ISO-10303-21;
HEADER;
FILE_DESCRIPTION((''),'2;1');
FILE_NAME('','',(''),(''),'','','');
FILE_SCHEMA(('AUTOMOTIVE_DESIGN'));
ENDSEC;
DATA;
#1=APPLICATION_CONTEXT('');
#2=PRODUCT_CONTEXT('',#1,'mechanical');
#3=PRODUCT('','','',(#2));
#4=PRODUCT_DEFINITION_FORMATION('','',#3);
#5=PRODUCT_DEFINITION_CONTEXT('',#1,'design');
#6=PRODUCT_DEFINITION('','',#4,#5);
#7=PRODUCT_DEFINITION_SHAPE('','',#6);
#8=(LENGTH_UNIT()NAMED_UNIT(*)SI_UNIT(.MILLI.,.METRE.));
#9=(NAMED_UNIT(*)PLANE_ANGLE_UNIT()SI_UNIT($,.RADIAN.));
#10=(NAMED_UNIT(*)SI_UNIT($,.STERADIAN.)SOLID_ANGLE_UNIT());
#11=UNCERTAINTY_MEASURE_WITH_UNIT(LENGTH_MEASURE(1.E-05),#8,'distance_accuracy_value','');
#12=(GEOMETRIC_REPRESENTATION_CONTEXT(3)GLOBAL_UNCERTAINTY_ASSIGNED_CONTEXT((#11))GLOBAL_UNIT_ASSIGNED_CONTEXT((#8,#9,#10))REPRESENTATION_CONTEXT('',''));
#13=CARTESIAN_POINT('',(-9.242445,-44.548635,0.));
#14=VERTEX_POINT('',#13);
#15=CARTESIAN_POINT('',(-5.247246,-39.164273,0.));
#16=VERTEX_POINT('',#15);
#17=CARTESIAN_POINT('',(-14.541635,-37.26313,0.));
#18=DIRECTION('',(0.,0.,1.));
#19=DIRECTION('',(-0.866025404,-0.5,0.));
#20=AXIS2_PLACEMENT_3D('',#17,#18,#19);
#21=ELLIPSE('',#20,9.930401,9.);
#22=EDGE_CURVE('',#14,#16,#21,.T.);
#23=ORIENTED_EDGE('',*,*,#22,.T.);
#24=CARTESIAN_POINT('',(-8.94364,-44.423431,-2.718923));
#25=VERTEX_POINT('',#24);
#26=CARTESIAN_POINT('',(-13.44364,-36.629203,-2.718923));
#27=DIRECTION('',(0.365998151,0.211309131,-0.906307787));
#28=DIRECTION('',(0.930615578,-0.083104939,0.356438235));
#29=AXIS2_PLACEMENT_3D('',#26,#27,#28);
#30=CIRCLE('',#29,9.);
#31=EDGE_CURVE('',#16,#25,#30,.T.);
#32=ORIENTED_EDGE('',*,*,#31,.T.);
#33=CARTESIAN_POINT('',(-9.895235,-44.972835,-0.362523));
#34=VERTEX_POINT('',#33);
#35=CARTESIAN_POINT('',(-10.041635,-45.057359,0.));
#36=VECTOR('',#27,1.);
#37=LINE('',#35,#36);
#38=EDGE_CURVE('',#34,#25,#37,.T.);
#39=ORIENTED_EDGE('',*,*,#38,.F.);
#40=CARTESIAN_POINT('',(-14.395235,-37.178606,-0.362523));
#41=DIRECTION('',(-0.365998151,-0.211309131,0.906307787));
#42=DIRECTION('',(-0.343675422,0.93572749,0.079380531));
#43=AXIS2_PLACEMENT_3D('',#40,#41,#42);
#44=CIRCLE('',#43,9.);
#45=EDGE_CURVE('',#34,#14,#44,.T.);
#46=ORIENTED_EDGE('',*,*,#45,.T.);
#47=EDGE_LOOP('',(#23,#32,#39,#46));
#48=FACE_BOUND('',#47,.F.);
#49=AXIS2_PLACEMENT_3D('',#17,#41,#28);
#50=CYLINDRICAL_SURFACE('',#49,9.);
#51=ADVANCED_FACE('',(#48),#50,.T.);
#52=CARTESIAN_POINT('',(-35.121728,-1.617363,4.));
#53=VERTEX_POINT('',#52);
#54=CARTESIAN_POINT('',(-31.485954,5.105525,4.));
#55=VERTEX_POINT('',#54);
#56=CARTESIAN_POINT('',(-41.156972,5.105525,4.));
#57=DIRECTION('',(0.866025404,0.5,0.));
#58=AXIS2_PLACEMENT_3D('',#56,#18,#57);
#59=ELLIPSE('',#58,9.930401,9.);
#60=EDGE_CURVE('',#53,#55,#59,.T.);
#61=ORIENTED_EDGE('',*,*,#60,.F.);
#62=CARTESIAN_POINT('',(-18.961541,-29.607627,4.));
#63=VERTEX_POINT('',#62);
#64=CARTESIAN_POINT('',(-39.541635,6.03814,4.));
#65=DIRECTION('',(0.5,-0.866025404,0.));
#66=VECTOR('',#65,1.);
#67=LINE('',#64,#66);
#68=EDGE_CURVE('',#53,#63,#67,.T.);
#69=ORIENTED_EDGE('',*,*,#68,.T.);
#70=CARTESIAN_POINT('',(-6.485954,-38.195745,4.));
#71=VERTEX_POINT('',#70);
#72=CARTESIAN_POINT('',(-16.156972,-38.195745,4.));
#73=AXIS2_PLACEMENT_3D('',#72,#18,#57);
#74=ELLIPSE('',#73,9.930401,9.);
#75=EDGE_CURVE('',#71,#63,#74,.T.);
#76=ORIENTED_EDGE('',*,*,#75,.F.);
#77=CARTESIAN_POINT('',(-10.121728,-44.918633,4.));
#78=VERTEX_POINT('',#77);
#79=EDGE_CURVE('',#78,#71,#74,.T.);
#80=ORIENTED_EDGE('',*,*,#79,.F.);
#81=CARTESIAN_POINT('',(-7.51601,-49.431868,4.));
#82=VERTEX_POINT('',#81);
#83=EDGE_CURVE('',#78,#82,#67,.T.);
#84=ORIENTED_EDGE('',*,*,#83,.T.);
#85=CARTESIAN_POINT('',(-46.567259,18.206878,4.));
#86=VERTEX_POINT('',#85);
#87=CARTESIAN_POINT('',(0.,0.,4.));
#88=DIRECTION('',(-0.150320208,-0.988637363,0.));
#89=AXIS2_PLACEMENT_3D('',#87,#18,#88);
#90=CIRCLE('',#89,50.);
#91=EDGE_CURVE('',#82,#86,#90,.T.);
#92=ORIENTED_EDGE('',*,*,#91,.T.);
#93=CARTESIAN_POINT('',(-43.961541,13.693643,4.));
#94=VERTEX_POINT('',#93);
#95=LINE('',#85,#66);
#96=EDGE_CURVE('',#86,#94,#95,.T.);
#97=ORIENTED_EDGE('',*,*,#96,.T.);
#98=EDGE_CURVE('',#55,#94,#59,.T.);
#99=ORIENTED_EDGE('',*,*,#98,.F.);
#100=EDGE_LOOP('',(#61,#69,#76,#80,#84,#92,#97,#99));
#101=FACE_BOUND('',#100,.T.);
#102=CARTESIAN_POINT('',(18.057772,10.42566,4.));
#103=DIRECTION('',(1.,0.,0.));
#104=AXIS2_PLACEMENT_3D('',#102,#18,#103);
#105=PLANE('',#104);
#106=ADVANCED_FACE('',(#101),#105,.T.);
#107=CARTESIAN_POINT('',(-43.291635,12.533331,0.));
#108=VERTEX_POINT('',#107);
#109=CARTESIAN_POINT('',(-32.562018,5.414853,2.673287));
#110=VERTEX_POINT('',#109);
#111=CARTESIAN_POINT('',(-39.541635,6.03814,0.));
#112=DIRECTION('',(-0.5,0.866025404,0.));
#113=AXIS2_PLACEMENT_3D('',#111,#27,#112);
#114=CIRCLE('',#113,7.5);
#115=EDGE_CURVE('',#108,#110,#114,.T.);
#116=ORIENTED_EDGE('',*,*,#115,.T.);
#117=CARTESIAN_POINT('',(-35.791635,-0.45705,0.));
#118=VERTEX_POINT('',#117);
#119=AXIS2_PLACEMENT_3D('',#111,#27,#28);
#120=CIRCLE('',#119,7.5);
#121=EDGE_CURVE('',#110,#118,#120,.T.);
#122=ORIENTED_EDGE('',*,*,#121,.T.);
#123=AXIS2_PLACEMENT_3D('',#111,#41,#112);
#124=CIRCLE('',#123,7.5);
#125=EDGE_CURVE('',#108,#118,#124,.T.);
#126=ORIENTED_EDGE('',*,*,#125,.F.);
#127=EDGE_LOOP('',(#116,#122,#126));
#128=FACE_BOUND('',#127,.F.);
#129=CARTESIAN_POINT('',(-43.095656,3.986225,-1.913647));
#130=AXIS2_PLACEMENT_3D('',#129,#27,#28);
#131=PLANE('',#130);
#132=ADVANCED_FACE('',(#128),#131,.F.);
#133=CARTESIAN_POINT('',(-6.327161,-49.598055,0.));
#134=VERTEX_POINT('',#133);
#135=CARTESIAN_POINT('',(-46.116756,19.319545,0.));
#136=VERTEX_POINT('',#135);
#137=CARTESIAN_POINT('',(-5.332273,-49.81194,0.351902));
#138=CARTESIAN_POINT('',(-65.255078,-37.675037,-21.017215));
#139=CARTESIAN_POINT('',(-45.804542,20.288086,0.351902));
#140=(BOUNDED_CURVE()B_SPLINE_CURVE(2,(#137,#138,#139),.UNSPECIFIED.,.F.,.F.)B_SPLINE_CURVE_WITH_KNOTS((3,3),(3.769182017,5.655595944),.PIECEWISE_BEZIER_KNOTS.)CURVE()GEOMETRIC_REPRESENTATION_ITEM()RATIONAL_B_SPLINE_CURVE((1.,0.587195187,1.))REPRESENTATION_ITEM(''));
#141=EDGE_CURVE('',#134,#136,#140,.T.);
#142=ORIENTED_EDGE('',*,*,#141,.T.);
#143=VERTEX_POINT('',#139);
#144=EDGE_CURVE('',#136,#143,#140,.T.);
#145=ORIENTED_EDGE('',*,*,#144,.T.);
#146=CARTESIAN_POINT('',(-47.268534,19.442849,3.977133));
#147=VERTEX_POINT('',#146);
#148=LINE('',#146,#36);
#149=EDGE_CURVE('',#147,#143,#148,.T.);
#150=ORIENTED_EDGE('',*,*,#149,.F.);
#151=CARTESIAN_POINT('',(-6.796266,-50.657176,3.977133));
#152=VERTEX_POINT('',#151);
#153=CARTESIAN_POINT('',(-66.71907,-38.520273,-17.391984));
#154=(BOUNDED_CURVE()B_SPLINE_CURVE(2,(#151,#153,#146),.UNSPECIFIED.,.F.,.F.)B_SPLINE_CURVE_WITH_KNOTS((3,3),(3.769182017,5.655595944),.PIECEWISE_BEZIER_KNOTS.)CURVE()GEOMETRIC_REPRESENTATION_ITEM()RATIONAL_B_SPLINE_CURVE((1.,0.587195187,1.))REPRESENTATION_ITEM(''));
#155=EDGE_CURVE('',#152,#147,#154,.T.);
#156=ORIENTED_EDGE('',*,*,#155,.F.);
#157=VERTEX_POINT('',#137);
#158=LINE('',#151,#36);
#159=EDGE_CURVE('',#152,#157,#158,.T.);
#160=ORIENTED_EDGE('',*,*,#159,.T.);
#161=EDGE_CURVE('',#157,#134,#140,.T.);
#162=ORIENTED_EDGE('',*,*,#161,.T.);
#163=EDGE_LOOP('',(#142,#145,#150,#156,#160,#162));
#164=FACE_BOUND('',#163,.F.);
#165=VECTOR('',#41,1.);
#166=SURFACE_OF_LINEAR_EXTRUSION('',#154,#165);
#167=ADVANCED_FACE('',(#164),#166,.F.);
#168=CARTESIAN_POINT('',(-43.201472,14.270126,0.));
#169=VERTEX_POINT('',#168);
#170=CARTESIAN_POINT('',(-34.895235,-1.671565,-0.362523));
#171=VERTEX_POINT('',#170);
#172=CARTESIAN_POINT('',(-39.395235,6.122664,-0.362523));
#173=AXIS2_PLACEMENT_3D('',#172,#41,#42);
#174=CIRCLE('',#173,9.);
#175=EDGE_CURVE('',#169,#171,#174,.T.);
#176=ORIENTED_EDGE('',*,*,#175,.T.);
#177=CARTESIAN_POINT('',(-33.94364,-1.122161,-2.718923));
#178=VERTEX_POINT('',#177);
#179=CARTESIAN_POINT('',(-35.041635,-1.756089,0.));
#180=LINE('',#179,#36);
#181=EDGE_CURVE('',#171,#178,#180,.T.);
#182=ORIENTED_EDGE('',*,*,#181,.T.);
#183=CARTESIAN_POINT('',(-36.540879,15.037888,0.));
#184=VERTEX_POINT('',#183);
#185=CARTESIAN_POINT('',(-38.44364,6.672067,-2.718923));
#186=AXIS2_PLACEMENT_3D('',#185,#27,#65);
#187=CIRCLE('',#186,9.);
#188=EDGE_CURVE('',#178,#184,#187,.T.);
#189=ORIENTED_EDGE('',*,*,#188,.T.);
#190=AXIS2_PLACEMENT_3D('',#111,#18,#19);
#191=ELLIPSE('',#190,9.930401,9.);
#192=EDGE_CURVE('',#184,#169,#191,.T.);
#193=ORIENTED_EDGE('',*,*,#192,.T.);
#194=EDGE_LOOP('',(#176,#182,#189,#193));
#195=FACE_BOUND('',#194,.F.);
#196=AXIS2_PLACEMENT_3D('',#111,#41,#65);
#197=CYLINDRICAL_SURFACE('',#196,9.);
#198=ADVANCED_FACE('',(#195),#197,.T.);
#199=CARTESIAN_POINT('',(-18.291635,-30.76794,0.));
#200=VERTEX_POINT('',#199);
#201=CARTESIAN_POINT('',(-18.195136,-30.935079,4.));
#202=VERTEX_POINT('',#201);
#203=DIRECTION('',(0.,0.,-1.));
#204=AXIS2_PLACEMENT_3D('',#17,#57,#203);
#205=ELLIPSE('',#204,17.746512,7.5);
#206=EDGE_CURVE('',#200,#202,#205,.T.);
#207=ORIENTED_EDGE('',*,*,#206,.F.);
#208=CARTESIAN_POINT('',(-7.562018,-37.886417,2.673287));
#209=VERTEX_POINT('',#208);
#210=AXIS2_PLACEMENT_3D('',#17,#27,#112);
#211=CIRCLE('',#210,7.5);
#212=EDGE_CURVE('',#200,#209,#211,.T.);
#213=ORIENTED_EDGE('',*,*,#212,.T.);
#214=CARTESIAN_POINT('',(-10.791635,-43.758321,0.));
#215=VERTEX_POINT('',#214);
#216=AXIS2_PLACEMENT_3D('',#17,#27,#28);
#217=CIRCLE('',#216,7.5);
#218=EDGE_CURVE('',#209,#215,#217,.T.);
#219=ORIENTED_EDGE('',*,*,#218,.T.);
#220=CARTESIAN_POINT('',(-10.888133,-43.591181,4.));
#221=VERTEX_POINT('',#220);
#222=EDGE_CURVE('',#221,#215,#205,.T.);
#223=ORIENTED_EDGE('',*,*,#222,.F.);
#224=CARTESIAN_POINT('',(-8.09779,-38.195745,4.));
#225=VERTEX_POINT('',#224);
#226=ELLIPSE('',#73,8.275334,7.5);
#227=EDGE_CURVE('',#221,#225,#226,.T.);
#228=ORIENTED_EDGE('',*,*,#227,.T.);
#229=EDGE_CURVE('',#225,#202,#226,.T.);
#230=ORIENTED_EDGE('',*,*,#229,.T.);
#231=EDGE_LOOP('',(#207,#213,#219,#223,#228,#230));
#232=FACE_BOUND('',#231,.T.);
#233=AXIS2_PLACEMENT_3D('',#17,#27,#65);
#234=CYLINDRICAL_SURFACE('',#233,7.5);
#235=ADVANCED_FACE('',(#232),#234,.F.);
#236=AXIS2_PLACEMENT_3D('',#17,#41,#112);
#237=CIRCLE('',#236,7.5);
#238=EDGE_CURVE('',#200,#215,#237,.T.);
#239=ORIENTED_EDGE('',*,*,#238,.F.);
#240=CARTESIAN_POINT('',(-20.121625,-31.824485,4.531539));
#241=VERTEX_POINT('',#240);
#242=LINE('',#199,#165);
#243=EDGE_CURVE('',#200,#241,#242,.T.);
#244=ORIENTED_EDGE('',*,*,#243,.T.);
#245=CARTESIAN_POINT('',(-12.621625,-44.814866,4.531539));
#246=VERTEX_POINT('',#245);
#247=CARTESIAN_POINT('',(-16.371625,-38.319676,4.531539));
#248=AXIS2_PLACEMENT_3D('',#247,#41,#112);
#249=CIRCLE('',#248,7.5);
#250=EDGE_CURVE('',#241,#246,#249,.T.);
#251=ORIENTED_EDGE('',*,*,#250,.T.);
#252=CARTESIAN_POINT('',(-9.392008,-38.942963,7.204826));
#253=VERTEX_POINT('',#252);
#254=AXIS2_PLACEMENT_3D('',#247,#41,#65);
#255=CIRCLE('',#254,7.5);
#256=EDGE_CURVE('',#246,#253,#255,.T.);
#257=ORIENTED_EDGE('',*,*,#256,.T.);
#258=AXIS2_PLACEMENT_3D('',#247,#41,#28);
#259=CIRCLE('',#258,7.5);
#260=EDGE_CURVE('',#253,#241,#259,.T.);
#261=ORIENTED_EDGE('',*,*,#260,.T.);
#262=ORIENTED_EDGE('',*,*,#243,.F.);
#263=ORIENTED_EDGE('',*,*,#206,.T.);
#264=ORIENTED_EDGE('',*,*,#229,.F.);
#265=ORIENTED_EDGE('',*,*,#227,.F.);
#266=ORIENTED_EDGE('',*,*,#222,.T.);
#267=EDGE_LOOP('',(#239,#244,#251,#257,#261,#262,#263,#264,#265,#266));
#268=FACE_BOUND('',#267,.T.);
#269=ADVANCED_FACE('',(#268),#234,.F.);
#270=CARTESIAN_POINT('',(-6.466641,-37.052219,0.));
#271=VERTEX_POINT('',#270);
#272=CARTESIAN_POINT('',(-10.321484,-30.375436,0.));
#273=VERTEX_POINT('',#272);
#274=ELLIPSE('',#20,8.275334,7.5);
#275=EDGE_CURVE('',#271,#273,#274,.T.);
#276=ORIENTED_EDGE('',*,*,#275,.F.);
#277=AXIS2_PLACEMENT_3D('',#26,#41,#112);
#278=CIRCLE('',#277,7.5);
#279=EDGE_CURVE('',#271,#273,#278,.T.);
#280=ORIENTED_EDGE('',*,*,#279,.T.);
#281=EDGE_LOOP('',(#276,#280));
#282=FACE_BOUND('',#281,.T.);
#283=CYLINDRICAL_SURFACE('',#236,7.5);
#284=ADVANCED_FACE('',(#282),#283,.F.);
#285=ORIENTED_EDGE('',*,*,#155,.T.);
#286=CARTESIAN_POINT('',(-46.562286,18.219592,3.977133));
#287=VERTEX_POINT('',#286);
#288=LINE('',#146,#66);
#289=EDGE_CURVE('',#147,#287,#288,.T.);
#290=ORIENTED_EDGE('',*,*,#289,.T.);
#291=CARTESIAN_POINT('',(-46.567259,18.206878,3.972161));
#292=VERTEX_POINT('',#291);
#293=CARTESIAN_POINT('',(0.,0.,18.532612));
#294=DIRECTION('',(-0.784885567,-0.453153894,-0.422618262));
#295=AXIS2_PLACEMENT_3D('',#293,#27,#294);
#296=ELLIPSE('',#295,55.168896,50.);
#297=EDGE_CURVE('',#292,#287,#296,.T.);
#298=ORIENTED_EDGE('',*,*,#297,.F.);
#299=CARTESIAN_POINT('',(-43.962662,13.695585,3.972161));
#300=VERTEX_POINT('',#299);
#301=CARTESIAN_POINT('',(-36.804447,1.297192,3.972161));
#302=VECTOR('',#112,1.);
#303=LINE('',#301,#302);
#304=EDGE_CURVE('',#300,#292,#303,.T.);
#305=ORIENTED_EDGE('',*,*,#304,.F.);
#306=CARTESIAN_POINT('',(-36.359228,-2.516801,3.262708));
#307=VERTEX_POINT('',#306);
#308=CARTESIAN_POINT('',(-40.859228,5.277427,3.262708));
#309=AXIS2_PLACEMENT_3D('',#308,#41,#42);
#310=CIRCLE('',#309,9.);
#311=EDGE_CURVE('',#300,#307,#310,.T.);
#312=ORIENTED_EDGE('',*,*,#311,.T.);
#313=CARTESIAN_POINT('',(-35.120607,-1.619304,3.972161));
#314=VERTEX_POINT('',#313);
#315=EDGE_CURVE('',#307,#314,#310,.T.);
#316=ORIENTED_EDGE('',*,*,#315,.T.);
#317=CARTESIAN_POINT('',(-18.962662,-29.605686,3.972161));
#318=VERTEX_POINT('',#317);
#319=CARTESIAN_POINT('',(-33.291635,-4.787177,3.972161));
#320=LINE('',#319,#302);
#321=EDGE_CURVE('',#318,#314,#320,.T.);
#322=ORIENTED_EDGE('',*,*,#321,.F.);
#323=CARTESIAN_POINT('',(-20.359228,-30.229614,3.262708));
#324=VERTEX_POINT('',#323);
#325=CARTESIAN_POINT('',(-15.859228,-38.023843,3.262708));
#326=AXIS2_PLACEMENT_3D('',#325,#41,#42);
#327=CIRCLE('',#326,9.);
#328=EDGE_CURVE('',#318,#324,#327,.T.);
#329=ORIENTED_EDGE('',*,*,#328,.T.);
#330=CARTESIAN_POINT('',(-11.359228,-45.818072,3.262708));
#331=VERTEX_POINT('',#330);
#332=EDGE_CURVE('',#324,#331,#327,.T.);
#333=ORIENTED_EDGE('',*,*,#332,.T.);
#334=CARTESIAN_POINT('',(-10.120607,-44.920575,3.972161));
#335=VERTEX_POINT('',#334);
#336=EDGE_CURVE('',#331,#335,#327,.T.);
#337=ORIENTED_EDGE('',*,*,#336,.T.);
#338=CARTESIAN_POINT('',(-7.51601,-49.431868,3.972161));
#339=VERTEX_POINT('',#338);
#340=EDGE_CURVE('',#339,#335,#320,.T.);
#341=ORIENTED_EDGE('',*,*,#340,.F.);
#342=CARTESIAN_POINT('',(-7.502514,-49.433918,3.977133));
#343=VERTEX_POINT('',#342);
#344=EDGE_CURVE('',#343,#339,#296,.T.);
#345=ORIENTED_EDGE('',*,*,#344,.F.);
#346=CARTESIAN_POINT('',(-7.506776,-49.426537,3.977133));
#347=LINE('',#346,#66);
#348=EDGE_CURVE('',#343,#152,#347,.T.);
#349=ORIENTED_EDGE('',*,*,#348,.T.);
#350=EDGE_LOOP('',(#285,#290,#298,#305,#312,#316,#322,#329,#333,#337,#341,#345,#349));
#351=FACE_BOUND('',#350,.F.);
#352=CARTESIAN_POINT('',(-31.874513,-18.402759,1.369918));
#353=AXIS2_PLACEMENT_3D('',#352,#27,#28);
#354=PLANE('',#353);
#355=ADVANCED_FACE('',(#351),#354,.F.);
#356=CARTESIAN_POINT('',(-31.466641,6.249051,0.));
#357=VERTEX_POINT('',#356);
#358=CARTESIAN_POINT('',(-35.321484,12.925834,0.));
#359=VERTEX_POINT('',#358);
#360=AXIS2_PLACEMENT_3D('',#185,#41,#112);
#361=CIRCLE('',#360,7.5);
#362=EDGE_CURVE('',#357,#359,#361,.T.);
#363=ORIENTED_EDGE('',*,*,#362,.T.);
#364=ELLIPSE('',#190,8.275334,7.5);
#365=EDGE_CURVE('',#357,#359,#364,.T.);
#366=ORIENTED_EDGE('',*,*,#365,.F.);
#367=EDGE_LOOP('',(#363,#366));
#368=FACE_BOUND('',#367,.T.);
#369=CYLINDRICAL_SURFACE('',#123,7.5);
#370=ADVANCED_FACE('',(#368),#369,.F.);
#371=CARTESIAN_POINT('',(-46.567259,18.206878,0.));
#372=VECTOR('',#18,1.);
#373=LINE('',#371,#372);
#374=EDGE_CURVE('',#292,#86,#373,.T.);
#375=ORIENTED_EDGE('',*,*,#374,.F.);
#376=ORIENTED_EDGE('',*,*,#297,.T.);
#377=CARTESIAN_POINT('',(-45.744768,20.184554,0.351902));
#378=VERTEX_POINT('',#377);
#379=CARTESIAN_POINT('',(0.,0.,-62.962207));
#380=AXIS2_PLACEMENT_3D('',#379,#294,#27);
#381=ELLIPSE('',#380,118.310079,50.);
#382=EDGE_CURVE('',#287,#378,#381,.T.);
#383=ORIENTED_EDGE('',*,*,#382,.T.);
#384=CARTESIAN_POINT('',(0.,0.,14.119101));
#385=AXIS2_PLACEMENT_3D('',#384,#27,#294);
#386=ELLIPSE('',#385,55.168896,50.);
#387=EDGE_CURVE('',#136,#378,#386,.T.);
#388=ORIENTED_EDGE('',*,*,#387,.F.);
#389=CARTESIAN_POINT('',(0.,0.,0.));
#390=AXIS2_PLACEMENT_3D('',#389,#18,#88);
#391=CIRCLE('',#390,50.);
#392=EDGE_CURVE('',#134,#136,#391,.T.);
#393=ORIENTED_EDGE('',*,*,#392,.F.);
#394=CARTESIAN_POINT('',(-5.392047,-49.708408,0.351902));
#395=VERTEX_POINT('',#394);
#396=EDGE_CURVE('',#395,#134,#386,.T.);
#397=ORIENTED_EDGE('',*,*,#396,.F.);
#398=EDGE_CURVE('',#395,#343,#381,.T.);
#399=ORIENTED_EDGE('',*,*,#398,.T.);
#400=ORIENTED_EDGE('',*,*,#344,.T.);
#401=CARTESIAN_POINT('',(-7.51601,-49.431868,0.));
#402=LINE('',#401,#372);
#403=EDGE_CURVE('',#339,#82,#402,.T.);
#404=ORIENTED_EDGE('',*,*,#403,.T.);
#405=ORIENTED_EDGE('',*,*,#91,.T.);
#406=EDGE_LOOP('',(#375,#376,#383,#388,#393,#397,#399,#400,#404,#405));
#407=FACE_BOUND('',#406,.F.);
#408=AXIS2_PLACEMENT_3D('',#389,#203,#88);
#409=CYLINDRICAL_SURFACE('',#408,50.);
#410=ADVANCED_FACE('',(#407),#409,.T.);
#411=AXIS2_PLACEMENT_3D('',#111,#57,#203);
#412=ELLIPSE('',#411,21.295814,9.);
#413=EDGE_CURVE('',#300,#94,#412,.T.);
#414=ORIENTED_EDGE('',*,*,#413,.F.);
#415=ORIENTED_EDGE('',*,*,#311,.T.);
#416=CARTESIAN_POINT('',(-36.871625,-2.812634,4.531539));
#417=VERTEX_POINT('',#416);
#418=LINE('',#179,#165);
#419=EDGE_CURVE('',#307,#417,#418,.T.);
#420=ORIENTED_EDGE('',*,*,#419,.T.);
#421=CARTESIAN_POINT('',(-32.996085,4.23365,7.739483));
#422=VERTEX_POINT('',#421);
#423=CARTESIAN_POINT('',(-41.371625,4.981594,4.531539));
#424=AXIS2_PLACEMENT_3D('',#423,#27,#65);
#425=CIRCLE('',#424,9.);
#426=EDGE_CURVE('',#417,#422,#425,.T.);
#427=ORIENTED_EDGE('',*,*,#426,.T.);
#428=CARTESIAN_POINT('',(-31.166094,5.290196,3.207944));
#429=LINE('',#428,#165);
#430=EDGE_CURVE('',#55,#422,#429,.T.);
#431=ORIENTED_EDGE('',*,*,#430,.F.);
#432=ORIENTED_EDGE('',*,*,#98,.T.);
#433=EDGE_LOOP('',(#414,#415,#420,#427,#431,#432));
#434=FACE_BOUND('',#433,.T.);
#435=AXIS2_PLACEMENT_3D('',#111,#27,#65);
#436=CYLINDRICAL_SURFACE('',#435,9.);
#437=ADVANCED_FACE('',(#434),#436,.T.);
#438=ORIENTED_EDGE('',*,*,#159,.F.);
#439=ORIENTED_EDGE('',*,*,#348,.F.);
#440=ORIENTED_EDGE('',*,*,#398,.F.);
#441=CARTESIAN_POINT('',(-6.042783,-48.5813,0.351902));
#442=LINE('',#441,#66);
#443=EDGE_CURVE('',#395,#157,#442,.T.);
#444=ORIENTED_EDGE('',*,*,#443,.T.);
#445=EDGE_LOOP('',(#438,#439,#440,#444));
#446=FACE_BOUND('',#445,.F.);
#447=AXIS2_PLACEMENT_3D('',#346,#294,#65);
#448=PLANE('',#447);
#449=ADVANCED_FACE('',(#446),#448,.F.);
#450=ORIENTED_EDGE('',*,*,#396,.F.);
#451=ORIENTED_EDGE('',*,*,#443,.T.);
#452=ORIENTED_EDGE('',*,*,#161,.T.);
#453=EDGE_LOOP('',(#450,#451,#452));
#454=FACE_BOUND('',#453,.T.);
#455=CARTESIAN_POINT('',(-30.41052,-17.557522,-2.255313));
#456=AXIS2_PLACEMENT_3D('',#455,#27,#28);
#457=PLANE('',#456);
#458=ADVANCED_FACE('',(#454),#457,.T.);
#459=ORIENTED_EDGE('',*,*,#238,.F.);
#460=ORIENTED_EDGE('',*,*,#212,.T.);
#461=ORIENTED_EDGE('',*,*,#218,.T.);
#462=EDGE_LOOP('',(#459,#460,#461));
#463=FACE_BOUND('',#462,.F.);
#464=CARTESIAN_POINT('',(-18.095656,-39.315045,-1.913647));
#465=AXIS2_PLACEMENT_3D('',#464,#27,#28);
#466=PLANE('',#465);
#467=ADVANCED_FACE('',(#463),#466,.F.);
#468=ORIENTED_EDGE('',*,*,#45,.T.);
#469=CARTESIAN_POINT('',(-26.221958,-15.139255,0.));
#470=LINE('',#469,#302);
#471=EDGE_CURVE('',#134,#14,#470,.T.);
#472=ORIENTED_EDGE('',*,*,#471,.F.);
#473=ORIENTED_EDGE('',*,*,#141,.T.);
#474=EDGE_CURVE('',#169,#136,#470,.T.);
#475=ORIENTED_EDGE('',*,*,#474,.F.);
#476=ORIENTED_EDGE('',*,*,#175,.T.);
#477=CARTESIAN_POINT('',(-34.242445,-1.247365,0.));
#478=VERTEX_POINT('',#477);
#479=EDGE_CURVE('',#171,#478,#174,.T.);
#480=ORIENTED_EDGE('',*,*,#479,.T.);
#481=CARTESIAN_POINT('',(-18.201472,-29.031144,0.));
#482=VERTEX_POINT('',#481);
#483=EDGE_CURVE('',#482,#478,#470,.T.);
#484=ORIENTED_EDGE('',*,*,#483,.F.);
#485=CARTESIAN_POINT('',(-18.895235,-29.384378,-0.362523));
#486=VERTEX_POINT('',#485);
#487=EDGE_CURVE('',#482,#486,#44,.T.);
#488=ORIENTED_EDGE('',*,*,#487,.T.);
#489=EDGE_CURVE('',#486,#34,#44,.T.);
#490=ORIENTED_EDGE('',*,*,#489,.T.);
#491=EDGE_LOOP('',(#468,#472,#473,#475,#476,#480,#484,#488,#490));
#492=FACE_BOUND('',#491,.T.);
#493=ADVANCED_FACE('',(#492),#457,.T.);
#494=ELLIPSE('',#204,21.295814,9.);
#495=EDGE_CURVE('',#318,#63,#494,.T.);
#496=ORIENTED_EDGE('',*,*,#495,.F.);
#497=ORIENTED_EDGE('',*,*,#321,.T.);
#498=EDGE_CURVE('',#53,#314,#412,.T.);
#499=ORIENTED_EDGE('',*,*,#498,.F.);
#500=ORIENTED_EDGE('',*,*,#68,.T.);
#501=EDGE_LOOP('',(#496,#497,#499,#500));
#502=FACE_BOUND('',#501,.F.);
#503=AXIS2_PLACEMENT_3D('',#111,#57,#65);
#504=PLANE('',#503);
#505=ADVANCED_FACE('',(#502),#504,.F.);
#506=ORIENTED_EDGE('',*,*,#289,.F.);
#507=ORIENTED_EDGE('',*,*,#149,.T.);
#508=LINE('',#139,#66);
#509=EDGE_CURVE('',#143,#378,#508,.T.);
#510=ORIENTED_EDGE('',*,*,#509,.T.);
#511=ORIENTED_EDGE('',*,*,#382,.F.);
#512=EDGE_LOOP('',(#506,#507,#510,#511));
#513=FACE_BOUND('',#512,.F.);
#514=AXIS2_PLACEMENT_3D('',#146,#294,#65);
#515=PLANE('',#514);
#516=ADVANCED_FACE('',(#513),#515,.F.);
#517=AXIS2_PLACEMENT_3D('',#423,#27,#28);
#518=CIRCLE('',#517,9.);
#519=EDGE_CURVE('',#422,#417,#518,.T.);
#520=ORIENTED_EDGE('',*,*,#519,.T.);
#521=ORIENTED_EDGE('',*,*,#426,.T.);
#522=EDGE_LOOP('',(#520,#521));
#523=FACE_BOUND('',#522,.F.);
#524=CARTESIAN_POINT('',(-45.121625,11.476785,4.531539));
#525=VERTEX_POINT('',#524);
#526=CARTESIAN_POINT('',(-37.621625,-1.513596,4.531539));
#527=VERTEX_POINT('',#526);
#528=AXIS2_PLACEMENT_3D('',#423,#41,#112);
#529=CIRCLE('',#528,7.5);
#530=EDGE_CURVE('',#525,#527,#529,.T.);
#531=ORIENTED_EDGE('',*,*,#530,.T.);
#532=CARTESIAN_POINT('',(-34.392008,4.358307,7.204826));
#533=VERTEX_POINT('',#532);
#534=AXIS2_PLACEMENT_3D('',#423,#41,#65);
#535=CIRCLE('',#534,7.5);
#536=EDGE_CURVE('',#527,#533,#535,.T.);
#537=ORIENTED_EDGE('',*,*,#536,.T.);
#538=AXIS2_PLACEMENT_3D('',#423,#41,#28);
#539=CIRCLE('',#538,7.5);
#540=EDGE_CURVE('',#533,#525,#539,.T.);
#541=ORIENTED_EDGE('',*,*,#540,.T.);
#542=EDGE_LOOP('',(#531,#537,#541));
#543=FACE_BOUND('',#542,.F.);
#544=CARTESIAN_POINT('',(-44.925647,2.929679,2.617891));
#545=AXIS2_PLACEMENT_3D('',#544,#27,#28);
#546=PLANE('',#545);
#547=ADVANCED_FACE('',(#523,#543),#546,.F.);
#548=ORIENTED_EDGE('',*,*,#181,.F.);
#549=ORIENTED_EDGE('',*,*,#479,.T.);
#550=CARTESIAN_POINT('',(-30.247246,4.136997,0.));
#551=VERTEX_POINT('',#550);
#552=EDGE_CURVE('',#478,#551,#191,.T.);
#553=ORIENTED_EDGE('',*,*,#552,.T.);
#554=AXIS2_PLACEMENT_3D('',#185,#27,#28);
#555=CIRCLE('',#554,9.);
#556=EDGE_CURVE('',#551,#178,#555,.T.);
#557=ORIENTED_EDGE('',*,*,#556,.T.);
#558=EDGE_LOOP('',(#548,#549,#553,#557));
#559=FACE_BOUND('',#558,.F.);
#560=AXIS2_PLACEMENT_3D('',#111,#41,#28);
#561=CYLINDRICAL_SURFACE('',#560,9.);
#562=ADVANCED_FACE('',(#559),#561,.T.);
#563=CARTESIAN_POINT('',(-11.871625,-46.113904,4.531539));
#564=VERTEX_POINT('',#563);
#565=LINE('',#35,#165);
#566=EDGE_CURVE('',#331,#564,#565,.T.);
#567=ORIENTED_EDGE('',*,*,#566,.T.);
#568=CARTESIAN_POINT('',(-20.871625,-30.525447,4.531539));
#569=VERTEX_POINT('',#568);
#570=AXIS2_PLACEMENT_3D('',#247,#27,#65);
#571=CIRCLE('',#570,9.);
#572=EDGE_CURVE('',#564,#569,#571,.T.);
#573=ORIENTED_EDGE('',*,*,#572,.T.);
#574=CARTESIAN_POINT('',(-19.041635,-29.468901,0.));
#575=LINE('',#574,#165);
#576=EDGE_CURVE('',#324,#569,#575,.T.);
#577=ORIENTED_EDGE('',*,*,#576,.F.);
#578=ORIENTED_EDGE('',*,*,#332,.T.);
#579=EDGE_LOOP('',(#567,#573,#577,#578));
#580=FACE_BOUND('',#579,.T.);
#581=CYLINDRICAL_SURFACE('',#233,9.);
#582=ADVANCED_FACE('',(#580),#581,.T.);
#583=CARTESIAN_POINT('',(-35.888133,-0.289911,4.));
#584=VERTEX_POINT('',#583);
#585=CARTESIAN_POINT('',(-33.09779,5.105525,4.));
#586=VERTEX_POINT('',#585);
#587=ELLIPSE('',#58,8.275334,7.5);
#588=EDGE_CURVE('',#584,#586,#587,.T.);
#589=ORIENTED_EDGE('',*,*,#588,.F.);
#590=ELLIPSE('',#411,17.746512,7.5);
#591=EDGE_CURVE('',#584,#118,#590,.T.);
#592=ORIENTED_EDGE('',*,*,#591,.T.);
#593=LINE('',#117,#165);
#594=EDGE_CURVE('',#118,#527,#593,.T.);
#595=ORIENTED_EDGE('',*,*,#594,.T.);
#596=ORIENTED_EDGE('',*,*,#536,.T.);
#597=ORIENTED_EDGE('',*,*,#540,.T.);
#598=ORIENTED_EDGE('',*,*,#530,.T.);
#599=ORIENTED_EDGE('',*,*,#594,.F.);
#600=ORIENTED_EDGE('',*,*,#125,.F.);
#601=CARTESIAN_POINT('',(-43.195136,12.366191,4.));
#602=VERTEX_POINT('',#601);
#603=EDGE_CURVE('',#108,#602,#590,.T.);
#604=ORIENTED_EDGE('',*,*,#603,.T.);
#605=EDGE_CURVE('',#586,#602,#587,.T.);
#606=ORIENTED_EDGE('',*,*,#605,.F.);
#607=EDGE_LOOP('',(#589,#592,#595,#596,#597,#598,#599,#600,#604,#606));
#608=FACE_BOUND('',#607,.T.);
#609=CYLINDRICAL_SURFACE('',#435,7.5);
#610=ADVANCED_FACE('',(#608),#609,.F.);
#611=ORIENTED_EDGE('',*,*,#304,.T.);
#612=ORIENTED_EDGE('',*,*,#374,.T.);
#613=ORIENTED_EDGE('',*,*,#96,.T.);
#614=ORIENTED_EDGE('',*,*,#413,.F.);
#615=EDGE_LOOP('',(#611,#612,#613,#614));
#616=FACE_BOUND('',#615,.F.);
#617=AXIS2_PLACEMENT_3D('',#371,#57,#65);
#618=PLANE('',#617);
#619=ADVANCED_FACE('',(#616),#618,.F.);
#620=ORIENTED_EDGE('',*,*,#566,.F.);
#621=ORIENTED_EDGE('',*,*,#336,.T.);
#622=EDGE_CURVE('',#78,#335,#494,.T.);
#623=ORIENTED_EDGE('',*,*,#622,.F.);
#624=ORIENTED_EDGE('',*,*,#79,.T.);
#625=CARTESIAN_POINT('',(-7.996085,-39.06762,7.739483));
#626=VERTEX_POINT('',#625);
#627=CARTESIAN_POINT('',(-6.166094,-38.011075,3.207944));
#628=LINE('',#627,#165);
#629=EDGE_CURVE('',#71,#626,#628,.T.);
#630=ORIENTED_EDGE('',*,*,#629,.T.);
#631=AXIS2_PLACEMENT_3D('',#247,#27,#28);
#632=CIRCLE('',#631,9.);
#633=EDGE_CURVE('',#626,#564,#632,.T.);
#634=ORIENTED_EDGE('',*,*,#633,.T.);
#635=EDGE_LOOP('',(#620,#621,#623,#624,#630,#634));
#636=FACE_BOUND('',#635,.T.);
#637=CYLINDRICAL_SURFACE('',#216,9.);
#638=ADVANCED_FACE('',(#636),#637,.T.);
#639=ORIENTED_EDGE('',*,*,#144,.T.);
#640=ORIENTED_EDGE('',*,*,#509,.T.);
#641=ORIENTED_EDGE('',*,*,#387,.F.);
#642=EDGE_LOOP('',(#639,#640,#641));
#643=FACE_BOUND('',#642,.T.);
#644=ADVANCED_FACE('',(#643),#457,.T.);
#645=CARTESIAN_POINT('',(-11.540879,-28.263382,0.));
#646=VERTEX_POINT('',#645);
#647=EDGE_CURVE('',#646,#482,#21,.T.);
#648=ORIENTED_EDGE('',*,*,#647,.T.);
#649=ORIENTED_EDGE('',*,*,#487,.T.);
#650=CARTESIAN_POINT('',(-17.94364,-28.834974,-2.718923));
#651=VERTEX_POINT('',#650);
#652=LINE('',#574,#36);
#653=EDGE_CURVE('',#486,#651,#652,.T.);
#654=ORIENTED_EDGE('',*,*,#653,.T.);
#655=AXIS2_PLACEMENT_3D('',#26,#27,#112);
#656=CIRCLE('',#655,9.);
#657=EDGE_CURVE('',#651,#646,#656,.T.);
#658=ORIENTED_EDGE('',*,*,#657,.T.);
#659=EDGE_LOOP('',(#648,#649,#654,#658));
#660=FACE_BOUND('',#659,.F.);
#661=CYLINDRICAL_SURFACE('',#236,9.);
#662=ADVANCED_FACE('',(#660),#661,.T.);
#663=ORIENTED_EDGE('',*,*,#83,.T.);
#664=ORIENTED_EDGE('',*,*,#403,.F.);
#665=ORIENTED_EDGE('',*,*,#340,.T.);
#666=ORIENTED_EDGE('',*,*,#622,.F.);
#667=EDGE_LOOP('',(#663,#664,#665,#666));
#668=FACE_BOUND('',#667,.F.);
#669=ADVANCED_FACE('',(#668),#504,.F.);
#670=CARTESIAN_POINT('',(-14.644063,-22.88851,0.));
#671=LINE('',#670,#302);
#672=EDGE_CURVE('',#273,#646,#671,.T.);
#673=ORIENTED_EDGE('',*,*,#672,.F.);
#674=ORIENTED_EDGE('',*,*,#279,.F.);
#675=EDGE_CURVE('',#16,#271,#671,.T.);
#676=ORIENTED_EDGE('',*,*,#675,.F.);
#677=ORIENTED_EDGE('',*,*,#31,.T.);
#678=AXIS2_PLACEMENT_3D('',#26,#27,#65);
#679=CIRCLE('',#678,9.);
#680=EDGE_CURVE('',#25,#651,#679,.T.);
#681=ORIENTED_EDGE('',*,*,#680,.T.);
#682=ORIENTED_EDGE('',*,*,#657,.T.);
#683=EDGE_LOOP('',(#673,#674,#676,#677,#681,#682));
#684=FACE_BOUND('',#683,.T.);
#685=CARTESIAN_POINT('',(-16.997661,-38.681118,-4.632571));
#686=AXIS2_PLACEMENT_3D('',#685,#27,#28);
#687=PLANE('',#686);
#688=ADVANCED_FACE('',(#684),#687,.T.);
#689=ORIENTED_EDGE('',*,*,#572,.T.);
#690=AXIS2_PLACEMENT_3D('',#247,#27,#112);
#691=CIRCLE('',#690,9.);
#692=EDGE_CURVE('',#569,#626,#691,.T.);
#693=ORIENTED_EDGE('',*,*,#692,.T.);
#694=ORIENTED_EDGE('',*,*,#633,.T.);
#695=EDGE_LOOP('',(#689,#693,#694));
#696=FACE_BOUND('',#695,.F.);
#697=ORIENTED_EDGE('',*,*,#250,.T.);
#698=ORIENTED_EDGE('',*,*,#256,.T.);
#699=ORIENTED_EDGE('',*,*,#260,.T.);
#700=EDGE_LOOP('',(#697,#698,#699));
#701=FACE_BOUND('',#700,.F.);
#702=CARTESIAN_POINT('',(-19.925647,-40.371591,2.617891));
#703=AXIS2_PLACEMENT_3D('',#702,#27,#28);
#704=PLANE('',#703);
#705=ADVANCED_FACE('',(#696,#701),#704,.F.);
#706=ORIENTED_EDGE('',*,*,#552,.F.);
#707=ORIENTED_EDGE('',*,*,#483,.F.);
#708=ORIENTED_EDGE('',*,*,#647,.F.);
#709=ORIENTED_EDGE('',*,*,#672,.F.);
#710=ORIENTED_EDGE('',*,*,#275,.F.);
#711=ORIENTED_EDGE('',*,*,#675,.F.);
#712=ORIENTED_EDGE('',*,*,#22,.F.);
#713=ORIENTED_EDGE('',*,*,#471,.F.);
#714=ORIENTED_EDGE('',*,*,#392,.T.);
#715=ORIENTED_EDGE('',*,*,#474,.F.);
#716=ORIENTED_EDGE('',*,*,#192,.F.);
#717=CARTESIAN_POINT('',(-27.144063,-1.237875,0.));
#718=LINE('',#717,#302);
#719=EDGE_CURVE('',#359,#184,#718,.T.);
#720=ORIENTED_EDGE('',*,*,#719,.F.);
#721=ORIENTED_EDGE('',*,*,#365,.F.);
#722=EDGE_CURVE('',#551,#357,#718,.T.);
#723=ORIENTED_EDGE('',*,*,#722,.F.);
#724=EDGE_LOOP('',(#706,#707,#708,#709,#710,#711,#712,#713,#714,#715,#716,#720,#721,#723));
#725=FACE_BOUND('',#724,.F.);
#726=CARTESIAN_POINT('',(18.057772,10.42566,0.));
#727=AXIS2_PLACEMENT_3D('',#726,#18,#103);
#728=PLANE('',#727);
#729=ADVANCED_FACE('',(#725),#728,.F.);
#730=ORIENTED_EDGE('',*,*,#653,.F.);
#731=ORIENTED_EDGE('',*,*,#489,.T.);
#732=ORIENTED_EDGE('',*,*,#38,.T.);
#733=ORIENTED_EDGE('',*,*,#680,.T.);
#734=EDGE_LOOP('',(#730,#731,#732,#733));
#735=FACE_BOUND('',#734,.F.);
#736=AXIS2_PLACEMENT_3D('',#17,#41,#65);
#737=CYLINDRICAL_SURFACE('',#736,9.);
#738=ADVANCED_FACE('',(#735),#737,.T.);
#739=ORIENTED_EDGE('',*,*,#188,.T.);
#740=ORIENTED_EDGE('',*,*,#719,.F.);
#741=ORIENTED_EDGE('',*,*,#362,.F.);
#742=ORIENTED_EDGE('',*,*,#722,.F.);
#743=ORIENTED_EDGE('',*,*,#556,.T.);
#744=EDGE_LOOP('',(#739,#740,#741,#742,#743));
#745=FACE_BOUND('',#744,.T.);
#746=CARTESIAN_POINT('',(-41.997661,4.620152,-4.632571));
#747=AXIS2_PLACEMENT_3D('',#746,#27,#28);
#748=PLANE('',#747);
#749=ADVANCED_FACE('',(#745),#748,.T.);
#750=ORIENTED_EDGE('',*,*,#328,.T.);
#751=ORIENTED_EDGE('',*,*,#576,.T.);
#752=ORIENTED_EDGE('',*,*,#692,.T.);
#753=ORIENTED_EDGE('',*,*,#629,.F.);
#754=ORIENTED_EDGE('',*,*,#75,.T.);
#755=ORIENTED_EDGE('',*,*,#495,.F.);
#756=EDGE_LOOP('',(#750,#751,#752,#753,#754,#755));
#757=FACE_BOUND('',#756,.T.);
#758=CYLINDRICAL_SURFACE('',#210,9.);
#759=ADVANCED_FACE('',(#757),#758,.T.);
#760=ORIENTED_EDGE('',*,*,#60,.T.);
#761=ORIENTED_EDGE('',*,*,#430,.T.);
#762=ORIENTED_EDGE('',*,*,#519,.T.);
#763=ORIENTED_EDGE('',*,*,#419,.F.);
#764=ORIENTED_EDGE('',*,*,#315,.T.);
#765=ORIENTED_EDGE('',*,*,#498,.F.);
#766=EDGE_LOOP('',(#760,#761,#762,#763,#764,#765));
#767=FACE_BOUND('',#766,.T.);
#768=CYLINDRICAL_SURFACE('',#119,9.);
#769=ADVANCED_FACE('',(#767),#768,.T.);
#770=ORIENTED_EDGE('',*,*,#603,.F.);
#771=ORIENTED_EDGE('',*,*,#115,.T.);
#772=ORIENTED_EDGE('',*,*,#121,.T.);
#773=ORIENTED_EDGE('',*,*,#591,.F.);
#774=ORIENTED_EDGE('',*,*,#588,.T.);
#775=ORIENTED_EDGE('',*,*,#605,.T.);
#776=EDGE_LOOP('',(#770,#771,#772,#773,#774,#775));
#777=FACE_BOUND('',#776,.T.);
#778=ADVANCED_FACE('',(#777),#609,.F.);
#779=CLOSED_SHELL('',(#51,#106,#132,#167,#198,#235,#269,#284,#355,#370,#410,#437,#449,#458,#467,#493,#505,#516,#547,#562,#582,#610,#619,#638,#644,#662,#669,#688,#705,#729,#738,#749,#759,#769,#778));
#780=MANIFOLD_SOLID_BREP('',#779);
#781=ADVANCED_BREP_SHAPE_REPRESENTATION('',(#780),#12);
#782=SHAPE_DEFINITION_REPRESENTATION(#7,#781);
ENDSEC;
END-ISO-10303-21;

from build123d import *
from build123d import SkipClean  # not in build123d's __all__

# Parameters (mm, degrees)
F2_DEPTH      = 4
F4_DEPTH      = 5
F5_DEPTH      = 45.5098150694
F5_DEPTH_BACK = 23.1317451549
F6_DEPTH      = 3
F9_DEPTH      = 4


with BuildPart() as f2:
    # F0 (on Top) → F2 (new body)
    with BuildSketch(Plane.XY):
        with BuildLine():
            Line((27.041634566, -15.612494996), (39.541634566, 6.0381400986))
            ThreePointArc((39.541634566, 6.0381400986), (34.6410161514, 20), (25, 31.224989992))
            Line((25, 31.224989992), (0, 31.224989992))
            Line((0, 31.224989992), (0, 0))
            Line((0, 0), (27.041634566, -15.612494996))
        make_face()
        with BuildLine():
            ThreePointArc((-14.541634566, -37.2631300906), (0, -40), (14.541634566, -37.2631300906))
            Line((14.541634566, -37.2631300906), (27.041634566, -15.612494996))
            Line((27.041634566, -15.612494996), (0, 0))
            Line((0, 0), (-27.041634566, -15.612494996))
            Line((-27.041634566, -15.612494996), (-14.541634566, -37.2631300906))
        make_face()
        with BuildLine():
            Line((0, 31.224989992), (-25, 31.224989992))
            ThreePointArc((-25, 31.224989992), (-34.6410161514, 20), (-39.541634566, 6.0381400986))
            Line((-39.541634566, 6.0381400986), (-27.041634566, -15.612494996))
            Line((-27.041634566, -15.612494996), (0, 0))
            Line((0, 0), (0, 31.224989992))
        make_face()
        with BuildLine():
            ThreePointArc((14.541634566, -37.2631300906), (33.0277563773, -22.5647359541), (40, 0))
            ThreePointArc((40, 0), (39.8852440298, 3.0277563773), (39.541634566, 6.0381400986))
            Line((39.541634566, 6.0381400986), (27.041634566, -15.612494996))
            Line((27.041634566, -15.612494996), (14.541634566, -37.2631300906))
        make_face()
        with BuildLine():
            Line((0, 31.224989992), (25, 31.224989992))
            ThreePointArc((25, 31.224989992), (0, 40), (-25, 31.224989992))
            Line((-25, 31.224989992), (0, 31.224989992))
        make_face()
        with BuildLine():
            ThreePointArc((39.541634566, 6.0381400986), (39.8852440298, 3.0277563773), (40, 0))
            ThreePointArc((40, 0), (33.0277563773, -22.5647359541), (14.541634566, -37.2631300906))
            ThreePointArc((14.541634566, -37.2631300906), (0, -40), (-14.541634566, -37.2631300906))
            Line((-14.541634566, -37.2631300906), (-7.5160103762, -49.4318681422))
            ThreePointArc((-7.5160103762, -49.4318681422), (32.5898717487, -37.9196553176), (50, 0))
            ThreePointArc((50, 0), (9.2638291816, 49.1343206821), (-46.5672587557, 18.2068781502))
            Line((-46.5672587557, 18.2068781502), (-39.541634566, 6.0381400986))
            ThreePointArc((-39.541634566, 6.0381400986), (-34.6410161514, 20), (-25, 31.224989992))
            ThreePointArc((-25, 31.224989992), (0, 40), (25, 31.224989992))
            ThreePointArc((25, 31.224989992), (34.6410161514, 20), (39.541634566, 6.0381400986))
        make_face()
    extrude(amount=F2_DEPTH)

    # F3 (on line) → F4 (join)
    with BuildSketch(Plane(origin=(-4.8298034606, -2.7884883281, 11.9598650349), x_dir=(0.9306155778, -0.0831049393, 0.3564382351), z_dir=(0.3659981508, 0.2113091309, -0.906307787))):
        with BuildLine():
            ThreePointArc((-41.3294511967, -12.2059585244), (-43.6253957362, -1.8508323218), (-33.2702695336, 0.4451122176))
            Line((-33.2702695336, 0.4451122176), (-32.4643513672, 1.7102192918))
            ThreePointArc((-32.4643513672, 1.7102192918), (-44.8905028104, -1.0449141555), (-42.135369363, -13.4710655987))
            Line((-42.135369363, -13.4710655986), (-41.3294511967, -12.2059585244))
        make_face()
        with BuildLine():
            Line((-32.4643513672, 1.7102192918), (-33.2702695336, 0.4451122176))
            ThreePointArc((-33.2702695336, 0.4451122176), (-30.724454247, -2.2729261844), (-29.7998603651, -5.8804231534))
            ThreePointArc((-29.7998603651, -5.8804231534), (-33.6923633961, -12.4558292716), (-41.3294511967, -12.2059585244))
            Line((-41.3294511967, -12.2059585244), (-42.135369363, -13.4710655986))
            ThreePointArc((-42.135369363, -13.4710655987), (-32.9708640023, -13.7709104952), (-28.2998603651, -5.8804231534))
            ThreePointArc((-28.2998603651, -5.8804231534), (-29.4093730234, -1.5514267906), (-32.4643513672, 1.7102192918))
        make_face()
        with BuildLine():
            ThreePointArc((-5.6004124901, 43.8804550986), (-18.0265639332, 41.1253216513), (-15.2714304859, 28.6991702082))
            Line((-15.2714304859, 28.6991702082), (-14.4655123195, 29.9642772824))
            ThreePointArc((-14.4655123195, 29.9642772824), (-16.761456859, 40.319403485), (-6.4063306564, 42.6153480244))
            Line((-6.4063306564, 42.6153480244), (-5.6004124901, 43.8804550986))
        make_face()
        with BuildLine():
            Line((-14.4655123195, 29.9642772824), (-15.2714304859, 28.6991702082))
            ThreePointArc((-15.2714304859, 28.6991702082), (-6.1069251251, 28.3993253116), (-1.435921488, 36.2898126534))
            ThreePointArc((-1.435921488, 36.2898126534), (-2.5454341462, 40.6188090162), (-5.6004124901, 43.8804550986))
            Line((-5.6004124901, 43.8804550986), (-6.4063306564, 42.6153480244))
            ThreePointArc((-6.4063306564, 42.6153480244), (-3.8605153698, 39.8973096224), (-2.935921488, 36.2898126534))
            ThreePointArc((-2.935921488, 36.2898126534), (-6.8284245189, 29.7144065353), (-14.4655123195, 29.9642772824))
        make_face()
    extrude(amount=-F4_DEPTH)

    # F3 (on line) → F5 (cut, two sides)
    with BuildSketch(Plane(origin=(-4.8298034606, -2.7884883281, 11.9598650349), x_dir=(0.9306155778, -0.0831049393, 0.3564382351), z_dir=(0.3659981508, 0.2113091309, -0.906307787))) as f5_sk:
        with BuildLine():
            Line((-41.3294511967, -12.2059585244), (-37.2998603651, -5.8804231534))
            Line((-37.2998603651, -5.8804231534), (-33.2702695336, 0.4451122176))
            ThreePointArc((-33.2702695336, 0.4451122176), (-43.6253957362, -1.8508323218), (-41.3294511967, -12.2059585244))
        make_face()
        with BuildLine():
            Line((-33.2702695336, 0.4451122176), (-37.2998603651, -5.8804231534))
            Line((-37.2998603651, -5.8804231534), (-41.3294511967, -12.2059585244))
            ThreePointArc((-41.3294511967, -12.2059585244), (-33.6923633961, -12.4558292716), (-29.7998603651, -5.8804231534))
            ThreePointArc((-29.7998603651, -5.8804231534), (-30.724454247, -2.2729261844), (-33.2702695336, 0.4451122176))
        make_face()
        with BuildLine():
            ThreePointArc((-6.4063306564, 42.6153480244), (-16.761456859, 40.319403485), (-14.4655123195, 29.9642772824))
            Line((-14.4655123195, 29.9642772824), (-10.435921488, 36.2898126534))
            Line((-10.435921488, 36.2898126534), (-6.4063306564, 42.6153480244))
        make_face()
        with BuildLine():
            Line((-10.435921488, 36.2898126534), (-14.4655123195, 29.9642772824))
            ThreePointArc((-14.4655123195, 29.9642772824), (-6.8284245189, 29.7144065353), (-2.935921488, 36.2898126534))
            ThreePointArc((-2.935921488, 36.2898126534), (-3.8605153698, 39.8973096224), (-6.4063306564, 42.6153480244))
            Line((-6.4063306564, 42.6153480244), (-10.435921488, 36.2898126534))
        make_face()
    with SkipClean():  # cleaning this boolean's faces spoils the solid; the shape is the same uncleaned
        extrude(amount=F5_DEPTH, mode=Mode.SUBTRACT)
        extrude(f5_sk.sketch, amount=-F5_DEPTH_BACK, mode=Mode.SUBTRACT)

    # F3 (on line) → F6 (join)
    with BuildSketch(Plane(origin=(-4.8298034606, -2.7884883281, 11.9598650349), x_dir=(0.9306155778, -0.0831049393, 0.3564382351), z_dir=(0.3659981508, 0.2113091309, -0.906307787))):
        with BuildLine():
            ThreePointArc((-41.3294511967, -12.2059585244), (-43.6253957362, -1.8508323218), (-33.2702695336, 0.4451122176))
            Line((-33.2702695336, 0.4451122176), (-32.4643513672, 1.7102192918))
            ThreePointArc((-32.4643513672, 1.7102192918), (-44.8905028104, -1.0449141555), (-42.135369363, -13.4710655987))
            Line((-42.135369363, -13.4710655986), (-41.3294511967, -12.2059585244))
        make_face()
        with BuildLine():
            Line((-32.4643513672, 1.7102192918), (-33.2702695336, 0.4451122176))
            ThreePointArc((-33.2702695336, 0.4451122176), (-30.724454247, -2.2729261844), (-29.7998603651, -5.8804231534))
            ThreePointArc((-29.7998603651, -5.8804231534), (-33.6923633961, -12.4558292716), (-41.3294511967, -12.2059585244))
            Line((-41.3294511967, -12.2059585244), (-42.135369363, -13.4710655986))
            ThreePointArc((-42.135369363, -13.4710655987), (-32.9708640023, -13.7709104952), (-28.2998603651, -5.8804231534))
            ThreePointArc((-28.2998603651, -5.8804231534), (-29.4093730234, -1.5514267906), (-32.4643513672, 1.7102192918))
        make_face()
        with BuildLine():
            Line((-41.3294511967, -12.2059585244), (-37.2998603651, -5.8804231534))
            Line((-37.2998603651, -5.8804231534), (-33.2702695336, 0.4451122176))
            ThreePointArc((-33.2702695336, 0.4451122176), (-43.6253957362, -1.8508323218), (-41.3294511967, -12.2059585244))
        make_face()
        with BuildLine():
            Line((-33.2702695336, 0.4451122176), (-37.2998603651, -5.8804231534))
            Line((-37.2998603651, -5.8804231534), (-41.3294511967, -12.2059585244))
            ThreePointArc((-41.3294511967, -12.2059585244), (-33.6923633961, -12.4558292716), (-29.7998603651, -5.8804231534))
            ThreePointArc((-29.7998603651, -5.8804231534), (-30.724454247, -2.2729261844), (-33.2702695336, 0.4451122176))
        make_face()
        with BuildLine():
            ThreePointArc((-5.6004124901, 43.8804550986), (-18.0265639332, 41.1253216513), (-15.2714304859, 28.6991702082))
            Line((-15.2714304859, 28.6991702082), (-14.4655123195, 29.9642772824))
            ThreePointArc((-14.4655123195, 29.9642772824), (-16.761456859, 40.319403485), (-6.4063306564, 42.6153480244))
            Line((-6.4063306564, 42.6153480244), (-5.6004124901, 43.8804550986))
        make_face()
        with BuildLine():
            Line((-14.4655123195, 29.9642772824), (-15.2714304859, 28.6991702082))
            ThreePointArc((-15.2714304859, 28.6991702082), (-6.1069251251, 28.3993253116), (-1.435921488, 36.2898126534))
            ThreePointArc((-1.435921488, 36.2898126534), (-2.5454341462, 40.6188090162), (-5.6004124901, 43.8804550986))
            Line((-5.6004124901, 43.8804550986), (-6.4063306564, 42.6153480244))
            ThreePointArc((-6.4063306564, 42.6153480244), (-3.8605153698, 39.8973096224), (-2.935921488, 36.2898126534))
            ThreePointArc((-2.935921488, 36.2898126534), (-6.8284245189, 29.7144065353), (-14.4655123195, 29.9642772824))
        make_face()
        with BuildLine():
            ThreePointArc((-6.4063306564, 42.6153480244), (-16.761456859, 40.319403485), (-14.4655123195, 29.9642772824))
            Line((-14.4655123195, 29.9642772824), (-10.435921488, 36.2898126534))
            Line((-10.435921488, 36.2898126534), (-6.4063306564, 42.6153480244))
        make_face()
        with BuildLine():
            Line((-10.435921488, 36.2898126534), (-14.4655123195, 29.9642772824))
            ThreePointArc((-14.4655123195, 29.9642772824), (-6.8284245189, 29.7144065353), (-2.935921488, 36.2898126534))
            ThreePointArc((-2.935921488, 36.2898126534), (-3.8605153698, 39.8973096224), (-6.4063306564, 42.6153480244))
            Line((-6.4063306564, 42.6153480244), (-10.435921488, 36.2898126534))
        make_face()
    with SkipClean():  # cleaning this boolean's faces spoils the solid; the shape is the same uncleaned
        extrude(amount=F6_DEPTH)

    # F8 (on offset) → F9 (join)
    with BuildSketch(Plane(origin=(-6.1473968034, -3.5492011993, 15.2225730682), x_dir=(0.9306155778, -0.0831049393, 0.3564382351), z_dir=(0.3659981508, 0.2113091309, -0.906307787))):
        with BuildLine():
            ThreePointArc((-40.62355156, -14.2442187536), (-44.8905028104, -1.0449141555), (-31.1246632897, 0.6668618625))
            Line((-31.1246632897, 0.6668618625), (-13.7596126828, 27.9260170532))
            ThreePointArc((-13.7596126828, 27.9260170532), (-18.0265639332, 41.1253216513), (-4.2607244125, 42.8370976693))
            Line((-4.2607244125, 42.8370976693), (-1.4607309953, 47.2324465122))
            Line((-1.4607309953, 47.2324465122), (-0.697246957, 48.4309417171))
            add(Edge.make_bspline(
                [(-0.697246957, 48.4309417171), (-65.0877492303, 41.4632093827), (-44.1870290155, -19.8380628014)],
                knots=[3.7691820168, 3.7691820168, 3.7691820168, 5.655595944, 5.655595944, 5.655595944], degree=2, weights=[1, 0.5871951872, 1]))
            Line((-44.1870290155, -19.8380628014), (-40.62355156, -14.2442187536))
        make_face()
    extrude(amount=F9_DEPTH)


solid = f2.part
